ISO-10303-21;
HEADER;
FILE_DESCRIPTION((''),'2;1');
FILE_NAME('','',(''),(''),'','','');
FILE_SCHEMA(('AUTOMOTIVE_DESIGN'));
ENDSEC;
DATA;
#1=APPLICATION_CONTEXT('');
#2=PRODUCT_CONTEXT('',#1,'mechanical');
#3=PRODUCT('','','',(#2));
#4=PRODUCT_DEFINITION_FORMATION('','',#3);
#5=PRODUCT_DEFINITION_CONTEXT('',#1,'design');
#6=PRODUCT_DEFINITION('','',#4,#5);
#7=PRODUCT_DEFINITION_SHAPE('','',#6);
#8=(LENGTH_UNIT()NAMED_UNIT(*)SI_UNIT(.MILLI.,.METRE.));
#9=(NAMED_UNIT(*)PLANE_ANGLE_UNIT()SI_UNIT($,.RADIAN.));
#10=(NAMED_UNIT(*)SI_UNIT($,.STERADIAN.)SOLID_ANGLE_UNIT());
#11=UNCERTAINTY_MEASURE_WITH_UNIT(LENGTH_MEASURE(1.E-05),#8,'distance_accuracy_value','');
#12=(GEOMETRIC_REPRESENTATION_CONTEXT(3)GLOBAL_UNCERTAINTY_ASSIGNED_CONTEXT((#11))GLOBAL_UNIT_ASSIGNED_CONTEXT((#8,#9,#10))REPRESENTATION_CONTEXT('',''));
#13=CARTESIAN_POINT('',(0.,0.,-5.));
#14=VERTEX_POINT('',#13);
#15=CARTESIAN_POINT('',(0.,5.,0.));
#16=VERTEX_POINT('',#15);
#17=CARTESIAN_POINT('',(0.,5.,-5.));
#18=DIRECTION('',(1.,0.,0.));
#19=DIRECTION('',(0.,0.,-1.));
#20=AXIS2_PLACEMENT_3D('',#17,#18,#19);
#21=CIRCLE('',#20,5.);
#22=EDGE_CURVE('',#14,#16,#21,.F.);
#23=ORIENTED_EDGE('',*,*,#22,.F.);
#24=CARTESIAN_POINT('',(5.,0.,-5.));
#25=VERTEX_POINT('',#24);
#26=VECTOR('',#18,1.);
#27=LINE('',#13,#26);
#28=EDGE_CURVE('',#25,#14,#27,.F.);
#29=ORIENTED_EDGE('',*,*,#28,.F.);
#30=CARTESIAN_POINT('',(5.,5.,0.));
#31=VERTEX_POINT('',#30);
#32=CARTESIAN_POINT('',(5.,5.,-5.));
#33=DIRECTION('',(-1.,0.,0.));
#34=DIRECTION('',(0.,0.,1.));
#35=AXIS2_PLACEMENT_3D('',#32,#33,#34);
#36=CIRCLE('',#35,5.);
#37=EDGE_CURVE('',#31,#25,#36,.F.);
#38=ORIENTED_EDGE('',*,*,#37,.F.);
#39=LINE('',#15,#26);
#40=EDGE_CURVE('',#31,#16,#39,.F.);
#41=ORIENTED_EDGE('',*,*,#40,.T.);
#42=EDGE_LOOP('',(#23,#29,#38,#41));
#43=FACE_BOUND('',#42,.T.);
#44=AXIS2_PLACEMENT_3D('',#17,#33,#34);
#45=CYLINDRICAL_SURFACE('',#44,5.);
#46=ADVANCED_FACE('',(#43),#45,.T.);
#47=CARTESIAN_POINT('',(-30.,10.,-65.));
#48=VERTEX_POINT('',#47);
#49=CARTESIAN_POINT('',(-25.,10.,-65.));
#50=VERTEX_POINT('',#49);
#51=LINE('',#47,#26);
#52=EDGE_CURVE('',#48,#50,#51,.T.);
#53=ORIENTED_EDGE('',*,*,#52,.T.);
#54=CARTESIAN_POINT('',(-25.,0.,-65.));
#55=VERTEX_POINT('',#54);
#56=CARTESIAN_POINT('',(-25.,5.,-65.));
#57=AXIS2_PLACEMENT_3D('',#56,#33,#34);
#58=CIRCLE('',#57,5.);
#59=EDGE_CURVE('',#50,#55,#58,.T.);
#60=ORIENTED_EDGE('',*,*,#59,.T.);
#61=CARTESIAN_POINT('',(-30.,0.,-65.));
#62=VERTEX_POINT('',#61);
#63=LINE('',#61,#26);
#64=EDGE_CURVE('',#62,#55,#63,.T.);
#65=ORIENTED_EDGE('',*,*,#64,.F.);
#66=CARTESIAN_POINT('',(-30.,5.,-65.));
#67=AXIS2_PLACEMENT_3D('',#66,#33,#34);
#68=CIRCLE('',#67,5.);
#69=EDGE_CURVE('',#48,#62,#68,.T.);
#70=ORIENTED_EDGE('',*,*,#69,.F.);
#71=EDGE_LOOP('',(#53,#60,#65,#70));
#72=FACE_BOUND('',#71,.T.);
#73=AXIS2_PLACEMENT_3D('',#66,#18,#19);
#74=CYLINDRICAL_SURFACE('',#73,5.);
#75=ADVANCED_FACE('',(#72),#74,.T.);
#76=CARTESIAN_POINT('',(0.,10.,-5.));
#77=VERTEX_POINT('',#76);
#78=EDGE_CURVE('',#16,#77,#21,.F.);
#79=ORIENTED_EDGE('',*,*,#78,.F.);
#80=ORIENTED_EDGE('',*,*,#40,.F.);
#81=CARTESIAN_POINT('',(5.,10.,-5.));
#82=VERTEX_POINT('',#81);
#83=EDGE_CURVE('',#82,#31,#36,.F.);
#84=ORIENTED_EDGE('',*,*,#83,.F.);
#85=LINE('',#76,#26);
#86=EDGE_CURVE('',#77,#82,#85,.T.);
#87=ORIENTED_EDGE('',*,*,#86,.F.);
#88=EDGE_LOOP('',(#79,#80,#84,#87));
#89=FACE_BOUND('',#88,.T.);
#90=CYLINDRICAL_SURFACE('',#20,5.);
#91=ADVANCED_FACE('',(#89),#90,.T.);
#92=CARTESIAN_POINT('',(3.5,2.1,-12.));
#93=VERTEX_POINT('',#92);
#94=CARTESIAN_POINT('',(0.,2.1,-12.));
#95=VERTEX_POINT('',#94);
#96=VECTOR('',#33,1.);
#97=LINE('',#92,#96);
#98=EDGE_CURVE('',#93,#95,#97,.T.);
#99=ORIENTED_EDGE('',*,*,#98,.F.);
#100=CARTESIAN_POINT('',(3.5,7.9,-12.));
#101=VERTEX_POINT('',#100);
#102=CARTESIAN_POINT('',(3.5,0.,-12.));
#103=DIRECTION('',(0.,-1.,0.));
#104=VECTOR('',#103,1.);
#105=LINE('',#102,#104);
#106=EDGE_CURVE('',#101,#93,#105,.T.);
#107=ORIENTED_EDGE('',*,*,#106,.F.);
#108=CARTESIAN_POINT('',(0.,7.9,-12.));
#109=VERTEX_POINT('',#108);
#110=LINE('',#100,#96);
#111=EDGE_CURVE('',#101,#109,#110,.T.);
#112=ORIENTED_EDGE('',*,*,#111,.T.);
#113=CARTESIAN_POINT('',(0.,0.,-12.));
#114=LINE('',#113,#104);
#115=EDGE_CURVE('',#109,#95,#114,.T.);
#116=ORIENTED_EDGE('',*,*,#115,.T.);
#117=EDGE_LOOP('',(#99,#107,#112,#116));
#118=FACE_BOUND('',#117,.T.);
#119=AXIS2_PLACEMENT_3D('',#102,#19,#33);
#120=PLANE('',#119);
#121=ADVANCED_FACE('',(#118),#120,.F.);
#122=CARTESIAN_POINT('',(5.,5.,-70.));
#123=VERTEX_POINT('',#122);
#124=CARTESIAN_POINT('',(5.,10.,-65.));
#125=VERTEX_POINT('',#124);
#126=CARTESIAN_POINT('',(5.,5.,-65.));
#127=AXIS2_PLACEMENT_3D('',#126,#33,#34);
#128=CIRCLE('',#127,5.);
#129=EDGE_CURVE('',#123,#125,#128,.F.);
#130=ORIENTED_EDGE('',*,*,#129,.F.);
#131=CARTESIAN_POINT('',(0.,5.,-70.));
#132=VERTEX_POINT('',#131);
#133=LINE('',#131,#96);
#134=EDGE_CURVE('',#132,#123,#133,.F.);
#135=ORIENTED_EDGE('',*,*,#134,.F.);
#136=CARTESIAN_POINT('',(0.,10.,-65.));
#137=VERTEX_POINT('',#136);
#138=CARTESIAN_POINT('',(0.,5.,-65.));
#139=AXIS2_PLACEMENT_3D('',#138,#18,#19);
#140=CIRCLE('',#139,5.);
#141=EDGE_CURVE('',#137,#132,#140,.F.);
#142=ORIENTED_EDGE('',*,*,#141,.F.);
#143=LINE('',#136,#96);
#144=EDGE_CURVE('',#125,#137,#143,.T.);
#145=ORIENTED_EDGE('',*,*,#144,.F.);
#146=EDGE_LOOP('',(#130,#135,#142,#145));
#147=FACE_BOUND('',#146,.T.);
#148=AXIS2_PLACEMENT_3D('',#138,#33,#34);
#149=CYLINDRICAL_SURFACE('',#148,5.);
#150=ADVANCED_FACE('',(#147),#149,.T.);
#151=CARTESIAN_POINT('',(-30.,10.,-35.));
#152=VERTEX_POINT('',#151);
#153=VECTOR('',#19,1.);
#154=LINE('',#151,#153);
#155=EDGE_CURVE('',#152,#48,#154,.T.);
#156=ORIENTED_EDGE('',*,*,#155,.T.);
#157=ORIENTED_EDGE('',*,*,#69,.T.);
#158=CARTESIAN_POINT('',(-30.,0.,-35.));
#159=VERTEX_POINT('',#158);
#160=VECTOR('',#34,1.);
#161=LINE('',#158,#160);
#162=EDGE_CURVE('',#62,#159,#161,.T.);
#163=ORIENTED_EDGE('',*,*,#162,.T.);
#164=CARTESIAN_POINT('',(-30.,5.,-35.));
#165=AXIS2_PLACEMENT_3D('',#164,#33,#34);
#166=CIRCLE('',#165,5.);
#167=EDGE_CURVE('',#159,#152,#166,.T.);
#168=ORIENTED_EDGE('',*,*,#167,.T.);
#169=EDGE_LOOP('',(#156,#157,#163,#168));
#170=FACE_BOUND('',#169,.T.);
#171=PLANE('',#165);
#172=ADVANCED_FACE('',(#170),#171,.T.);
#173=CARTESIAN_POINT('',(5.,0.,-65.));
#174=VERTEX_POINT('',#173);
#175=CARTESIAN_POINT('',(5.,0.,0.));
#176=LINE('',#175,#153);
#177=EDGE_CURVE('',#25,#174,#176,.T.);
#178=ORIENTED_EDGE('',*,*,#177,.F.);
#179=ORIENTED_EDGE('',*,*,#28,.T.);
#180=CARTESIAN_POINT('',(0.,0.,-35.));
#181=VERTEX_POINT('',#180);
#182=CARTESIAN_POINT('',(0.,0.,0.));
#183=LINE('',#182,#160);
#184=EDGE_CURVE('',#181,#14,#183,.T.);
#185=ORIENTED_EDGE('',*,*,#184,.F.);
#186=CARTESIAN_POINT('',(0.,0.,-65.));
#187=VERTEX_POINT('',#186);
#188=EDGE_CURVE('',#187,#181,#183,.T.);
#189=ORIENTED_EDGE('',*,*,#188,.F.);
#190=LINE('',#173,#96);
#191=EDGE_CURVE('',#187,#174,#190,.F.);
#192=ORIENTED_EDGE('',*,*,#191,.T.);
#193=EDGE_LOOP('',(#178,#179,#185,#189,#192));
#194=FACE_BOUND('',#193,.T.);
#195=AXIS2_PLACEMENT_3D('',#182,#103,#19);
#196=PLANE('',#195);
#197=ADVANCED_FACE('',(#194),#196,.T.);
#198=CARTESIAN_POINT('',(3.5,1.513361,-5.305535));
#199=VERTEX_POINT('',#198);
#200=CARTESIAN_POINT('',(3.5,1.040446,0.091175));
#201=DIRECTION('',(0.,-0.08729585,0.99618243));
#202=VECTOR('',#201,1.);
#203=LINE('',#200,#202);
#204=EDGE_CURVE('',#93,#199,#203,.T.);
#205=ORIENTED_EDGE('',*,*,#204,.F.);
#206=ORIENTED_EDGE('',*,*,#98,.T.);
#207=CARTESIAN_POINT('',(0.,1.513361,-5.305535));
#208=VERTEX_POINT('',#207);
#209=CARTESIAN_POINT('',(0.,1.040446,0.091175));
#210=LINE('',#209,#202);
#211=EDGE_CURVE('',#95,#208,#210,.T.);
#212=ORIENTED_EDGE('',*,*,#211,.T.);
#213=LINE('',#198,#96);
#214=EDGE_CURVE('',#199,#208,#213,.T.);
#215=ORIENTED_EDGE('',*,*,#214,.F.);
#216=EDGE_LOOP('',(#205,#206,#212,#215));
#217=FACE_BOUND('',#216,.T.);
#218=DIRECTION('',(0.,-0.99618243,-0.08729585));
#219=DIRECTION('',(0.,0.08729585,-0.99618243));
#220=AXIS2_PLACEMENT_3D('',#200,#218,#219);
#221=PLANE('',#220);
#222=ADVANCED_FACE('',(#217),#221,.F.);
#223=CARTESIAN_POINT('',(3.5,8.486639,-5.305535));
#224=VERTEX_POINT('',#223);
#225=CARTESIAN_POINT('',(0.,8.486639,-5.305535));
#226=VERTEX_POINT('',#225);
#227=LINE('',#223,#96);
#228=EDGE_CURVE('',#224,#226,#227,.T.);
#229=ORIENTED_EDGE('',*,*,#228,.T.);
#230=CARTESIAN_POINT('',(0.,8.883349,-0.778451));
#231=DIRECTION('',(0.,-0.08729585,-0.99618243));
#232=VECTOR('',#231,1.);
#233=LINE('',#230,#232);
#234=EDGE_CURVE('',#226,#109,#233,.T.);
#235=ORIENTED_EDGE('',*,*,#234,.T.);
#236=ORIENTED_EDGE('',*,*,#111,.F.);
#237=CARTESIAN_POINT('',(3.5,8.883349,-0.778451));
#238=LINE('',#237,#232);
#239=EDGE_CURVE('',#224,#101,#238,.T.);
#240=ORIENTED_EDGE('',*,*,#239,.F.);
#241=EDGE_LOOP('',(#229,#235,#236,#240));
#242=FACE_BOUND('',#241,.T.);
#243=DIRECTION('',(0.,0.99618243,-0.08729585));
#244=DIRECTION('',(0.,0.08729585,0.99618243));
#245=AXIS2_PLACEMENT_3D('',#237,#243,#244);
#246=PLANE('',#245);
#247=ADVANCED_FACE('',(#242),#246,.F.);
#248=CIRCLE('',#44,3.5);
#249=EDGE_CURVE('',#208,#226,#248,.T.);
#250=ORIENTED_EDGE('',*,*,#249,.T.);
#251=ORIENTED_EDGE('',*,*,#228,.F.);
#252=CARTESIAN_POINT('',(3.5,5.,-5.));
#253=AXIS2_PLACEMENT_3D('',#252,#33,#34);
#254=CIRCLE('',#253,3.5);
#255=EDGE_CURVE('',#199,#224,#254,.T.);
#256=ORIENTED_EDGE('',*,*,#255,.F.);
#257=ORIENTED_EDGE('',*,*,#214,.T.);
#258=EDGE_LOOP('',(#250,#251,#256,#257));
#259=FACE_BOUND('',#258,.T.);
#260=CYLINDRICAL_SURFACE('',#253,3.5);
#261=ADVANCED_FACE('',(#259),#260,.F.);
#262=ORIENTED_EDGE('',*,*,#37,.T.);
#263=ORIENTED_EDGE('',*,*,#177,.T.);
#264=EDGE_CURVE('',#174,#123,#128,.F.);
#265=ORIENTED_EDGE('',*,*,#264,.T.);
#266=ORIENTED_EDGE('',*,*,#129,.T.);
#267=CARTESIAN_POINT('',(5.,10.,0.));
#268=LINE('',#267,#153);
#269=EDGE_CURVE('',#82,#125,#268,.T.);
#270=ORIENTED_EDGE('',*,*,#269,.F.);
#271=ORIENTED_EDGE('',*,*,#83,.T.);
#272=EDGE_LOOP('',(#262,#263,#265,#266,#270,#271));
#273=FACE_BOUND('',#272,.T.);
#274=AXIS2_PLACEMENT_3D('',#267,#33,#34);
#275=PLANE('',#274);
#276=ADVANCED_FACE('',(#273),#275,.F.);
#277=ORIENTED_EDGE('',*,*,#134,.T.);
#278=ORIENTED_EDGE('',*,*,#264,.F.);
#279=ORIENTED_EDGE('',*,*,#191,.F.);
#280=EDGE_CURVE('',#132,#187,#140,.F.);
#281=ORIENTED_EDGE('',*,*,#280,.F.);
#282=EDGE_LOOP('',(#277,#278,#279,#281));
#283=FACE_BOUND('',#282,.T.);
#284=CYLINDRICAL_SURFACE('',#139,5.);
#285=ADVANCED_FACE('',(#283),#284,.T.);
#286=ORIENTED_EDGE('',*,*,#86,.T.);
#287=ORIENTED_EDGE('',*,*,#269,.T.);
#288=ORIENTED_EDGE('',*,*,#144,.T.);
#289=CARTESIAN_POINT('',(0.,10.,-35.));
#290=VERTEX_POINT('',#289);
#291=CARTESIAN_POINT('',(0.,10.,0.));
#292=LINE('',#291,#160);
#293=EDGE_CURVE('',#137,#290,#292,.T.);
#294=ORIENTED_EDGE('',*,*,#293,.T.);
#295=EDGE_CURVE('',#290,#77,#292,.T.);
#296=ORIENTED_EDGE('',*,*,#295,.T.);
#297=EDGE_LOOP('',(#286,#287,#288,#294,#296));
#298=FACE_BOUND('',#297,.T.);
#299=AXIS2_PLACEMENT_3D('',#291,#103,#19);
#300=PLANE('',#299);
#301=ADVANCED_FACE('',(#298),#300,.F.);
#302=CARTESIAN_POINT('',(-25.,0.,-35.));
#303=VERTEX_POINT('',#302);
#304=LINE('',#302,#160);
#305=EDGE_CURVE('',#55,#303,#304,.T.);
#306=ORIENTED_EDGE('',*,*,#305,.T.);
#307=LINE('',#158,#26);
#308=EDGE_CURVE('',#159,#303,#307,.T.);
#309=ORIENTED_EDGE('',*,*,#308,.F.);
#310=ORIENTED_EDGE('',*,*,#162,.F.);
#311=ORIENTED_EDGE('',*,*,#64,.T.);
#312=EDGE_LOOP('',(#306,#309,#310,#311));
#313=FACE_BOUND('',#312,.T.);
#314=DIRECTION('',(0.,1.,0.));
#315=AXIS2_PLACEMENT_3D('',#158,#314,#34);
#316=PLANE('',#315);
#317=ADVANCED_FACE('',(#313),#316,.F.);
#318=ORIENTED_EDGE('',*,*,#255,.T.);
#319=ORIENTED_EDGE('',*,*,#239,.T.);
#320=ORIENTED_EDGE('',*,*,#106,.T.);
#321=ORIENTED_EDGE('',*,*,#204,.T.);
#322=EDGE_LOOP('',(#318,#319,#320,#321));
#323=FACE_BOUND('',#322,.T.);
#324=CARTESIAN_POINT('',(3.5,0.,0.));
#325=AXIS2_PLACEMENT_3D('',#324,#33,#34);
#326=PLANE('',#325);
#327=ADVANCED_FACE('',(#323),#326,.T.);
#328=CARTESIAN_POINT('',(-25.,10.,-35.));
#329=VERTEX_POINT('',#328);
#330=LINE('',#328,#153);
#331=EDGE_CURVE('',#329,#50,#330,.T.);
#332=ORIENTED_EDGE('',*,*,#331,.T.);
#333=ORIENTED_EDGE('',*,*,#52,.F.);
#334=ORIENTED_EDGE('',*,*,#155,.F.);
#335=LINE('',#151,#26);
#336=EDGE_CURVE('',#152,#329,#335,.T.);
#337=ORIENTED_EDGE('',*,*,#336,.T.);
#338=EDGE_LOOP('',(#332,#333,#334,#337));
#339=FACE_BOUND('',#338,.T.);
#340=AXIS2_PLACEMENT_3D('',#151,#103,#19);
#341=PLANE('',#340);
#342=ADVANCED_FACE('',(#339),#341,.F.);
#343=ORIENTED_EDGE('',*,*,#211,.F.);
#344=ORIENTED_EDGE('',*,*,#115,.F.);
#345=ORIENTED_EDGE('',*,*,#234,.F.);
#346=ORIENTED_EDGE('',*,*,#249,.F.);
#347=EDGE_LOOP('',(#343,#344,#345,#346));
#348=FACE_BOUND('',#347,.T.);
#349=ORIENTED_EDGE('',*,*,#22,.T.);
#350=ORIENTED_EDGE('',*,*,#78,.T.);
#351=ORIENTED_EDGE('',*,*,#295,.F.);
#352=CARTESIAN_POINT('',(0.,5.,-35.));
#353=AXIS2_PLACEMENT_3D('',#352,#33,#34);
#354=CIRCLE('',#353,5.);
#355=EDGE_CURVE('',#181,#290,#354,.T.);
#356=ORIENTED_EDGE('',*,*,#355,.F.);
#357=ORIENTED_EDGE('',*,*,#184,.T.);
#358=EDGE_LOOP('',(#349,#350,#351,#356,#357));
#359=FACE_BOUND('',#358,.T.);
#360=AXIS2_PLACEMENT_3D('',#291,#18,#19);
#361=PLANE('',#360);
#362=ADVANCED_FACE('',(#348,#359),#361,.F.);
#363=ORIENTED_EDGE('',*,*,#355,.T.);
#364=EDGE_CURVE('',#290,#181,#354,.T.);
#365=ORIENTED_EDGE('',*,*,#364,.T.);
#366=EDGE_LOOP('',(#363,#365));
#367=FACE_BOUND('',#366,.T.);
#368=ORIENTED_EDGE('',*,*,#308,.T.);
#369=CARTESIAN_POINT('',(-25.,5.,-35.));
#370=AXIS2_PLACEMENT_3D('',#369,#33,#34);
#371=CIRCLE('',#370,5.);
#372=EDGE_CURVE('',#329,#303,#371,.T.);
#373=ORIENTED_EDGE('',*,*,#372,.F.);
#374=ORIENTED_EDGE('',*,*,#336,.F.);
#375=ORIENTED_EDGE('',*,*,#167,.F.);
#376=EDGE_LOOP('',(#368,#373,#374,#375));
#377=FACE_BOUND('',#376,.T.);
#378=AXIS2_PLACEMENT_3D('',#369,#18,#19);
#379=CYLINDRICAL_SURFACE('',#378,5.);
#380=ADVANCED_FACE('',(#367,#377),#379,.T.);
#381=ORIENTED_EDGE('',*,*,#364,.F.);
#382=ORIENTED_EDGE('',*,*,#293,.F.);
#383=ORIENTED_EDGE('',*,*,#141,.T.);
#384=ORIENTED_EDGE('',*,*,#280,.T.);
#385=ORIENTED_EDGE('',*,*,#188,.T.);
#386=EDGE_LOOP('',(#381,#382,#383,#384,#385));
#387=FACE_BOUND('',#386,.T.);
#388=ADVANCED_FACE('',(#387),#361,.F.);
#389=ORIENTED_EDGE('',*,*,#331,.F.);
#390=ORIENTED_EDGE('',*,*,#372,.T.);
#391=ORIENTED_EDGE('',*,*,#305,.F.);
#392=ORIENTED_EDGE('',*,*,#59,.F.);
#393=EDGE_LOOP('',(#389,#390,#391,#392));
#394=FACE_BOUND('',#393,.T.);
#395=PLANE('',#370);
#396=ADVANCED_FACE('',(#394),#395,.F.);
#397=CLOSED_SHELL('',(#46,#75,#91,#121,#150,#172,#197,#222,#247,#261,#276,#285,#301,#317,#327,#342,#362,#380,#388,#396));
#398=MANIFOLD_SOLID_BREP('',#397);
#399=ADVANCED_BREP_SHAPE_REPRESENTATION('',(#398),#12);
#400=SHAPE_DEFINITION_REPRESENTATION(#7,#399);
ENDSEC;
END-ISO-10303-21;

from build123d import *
from build123d.topology import SkipClean

# Parameters (mm, degrees)
IZIM1_W                     = 5
IZIM1_H                     = 70
Y_KSEKLIK_EKSTR_ZYON1_DEPTH = 10
IZIM3_R                     = 3.5
KES_EKSTR_ZYON2_DEPTH       = 3.5
IZIM2_R                     = 5
Y_KSEKLIK_EKSTR_ZYON4_DEPTH = 25
RADYUS1_R                   = 5
Y_KSEKLIK_EKSTR_ZYON5_DEPTH = 5


with BuildPart() as part:
    # Çizim1 → Yükseklik-Ekstrüzyon1 (new body)
    with BuildSketch(Plane(origin=(0, 0, 0), x_dir=(1, 0, 0), z_dir=(0, 1, 0))):
        with Locations((2.5, 35)):
            Rectangle(IZIM1_W, IZIM1_H)
    extrude(amount=Y_KSEKLIK_EKSTR_ZYON1_DEPTH)

    # Çizim3 → Kes-Ekstrüzyon2 (cut)
    with BuildSketch(Plane.ZY):
        with Locations((-5, 5)):
            Circle(IZIM3_R)
        with BuildLine():
            ThreePointArc((-5.305535476, 1.513361494), (-8.5, 5), (-5.305535476, 8.486638506))
            Line((-5.305535476, 8.486638506), (-12, 7.9))
            Line((-12, 7.9), (-12, 2.1))
            Line((-12, 2.1), (-5.305535476, 1.513361494))
        make_face()
    extrude(amount=-KES_EKSTR_ZYON2_DEPTH, mode=Mode.SUBTRACT)

    # Çizim2 → Yükseklik-Ekstrüzyon4 (add)
    with BuildSketch(Plane.ZY):
        with Locations(Location((-35, 5, 0), (0, 0, 270))):
            Circle(IZIM2_R)
    extrude(amount=Y_KSEKLIK_EKSTR_ZYON4_DEPTH)

    # Radyus1
    radyus1_edges = [part.edges().sort_by_distance(p)[0] for p in [
        (2.5, 0, -70),
        (2.5, 0, 0),
        (2.5, 10, 0),
        (2.5, 10, -70),
    ]]
    fillet(radyus1_edges, radius=RADYUS1_R - 0.0001)  # a hair under: the kernel refuses the full size

    # Çizim4 → Yükseklik-Ekstrüzyon5 (add)
    with SkipClean():  # the faces are left unmerged after this step: merging them gives an invalid solid
        with BuildSketch(Plane.ZY.offset(25)):
            with BuildLine():
                Line((-35, 0), (-65, 0))
                ThreePointArc((-65, 0), (-70, 5), (-65, 10))
                Line((-65, 10), (-35, 10))
                ThreePointArc((-35, 10), (-30, 5), (-35, 0))
            make_face()
        extrude(amount=Y_KSEKLIK_EKSTR_ZYON5_DEPTH)
    add(part.part.scale(1), mode=Mode.REPLACE)  # the faces are merged on a copy


solid = part.part
